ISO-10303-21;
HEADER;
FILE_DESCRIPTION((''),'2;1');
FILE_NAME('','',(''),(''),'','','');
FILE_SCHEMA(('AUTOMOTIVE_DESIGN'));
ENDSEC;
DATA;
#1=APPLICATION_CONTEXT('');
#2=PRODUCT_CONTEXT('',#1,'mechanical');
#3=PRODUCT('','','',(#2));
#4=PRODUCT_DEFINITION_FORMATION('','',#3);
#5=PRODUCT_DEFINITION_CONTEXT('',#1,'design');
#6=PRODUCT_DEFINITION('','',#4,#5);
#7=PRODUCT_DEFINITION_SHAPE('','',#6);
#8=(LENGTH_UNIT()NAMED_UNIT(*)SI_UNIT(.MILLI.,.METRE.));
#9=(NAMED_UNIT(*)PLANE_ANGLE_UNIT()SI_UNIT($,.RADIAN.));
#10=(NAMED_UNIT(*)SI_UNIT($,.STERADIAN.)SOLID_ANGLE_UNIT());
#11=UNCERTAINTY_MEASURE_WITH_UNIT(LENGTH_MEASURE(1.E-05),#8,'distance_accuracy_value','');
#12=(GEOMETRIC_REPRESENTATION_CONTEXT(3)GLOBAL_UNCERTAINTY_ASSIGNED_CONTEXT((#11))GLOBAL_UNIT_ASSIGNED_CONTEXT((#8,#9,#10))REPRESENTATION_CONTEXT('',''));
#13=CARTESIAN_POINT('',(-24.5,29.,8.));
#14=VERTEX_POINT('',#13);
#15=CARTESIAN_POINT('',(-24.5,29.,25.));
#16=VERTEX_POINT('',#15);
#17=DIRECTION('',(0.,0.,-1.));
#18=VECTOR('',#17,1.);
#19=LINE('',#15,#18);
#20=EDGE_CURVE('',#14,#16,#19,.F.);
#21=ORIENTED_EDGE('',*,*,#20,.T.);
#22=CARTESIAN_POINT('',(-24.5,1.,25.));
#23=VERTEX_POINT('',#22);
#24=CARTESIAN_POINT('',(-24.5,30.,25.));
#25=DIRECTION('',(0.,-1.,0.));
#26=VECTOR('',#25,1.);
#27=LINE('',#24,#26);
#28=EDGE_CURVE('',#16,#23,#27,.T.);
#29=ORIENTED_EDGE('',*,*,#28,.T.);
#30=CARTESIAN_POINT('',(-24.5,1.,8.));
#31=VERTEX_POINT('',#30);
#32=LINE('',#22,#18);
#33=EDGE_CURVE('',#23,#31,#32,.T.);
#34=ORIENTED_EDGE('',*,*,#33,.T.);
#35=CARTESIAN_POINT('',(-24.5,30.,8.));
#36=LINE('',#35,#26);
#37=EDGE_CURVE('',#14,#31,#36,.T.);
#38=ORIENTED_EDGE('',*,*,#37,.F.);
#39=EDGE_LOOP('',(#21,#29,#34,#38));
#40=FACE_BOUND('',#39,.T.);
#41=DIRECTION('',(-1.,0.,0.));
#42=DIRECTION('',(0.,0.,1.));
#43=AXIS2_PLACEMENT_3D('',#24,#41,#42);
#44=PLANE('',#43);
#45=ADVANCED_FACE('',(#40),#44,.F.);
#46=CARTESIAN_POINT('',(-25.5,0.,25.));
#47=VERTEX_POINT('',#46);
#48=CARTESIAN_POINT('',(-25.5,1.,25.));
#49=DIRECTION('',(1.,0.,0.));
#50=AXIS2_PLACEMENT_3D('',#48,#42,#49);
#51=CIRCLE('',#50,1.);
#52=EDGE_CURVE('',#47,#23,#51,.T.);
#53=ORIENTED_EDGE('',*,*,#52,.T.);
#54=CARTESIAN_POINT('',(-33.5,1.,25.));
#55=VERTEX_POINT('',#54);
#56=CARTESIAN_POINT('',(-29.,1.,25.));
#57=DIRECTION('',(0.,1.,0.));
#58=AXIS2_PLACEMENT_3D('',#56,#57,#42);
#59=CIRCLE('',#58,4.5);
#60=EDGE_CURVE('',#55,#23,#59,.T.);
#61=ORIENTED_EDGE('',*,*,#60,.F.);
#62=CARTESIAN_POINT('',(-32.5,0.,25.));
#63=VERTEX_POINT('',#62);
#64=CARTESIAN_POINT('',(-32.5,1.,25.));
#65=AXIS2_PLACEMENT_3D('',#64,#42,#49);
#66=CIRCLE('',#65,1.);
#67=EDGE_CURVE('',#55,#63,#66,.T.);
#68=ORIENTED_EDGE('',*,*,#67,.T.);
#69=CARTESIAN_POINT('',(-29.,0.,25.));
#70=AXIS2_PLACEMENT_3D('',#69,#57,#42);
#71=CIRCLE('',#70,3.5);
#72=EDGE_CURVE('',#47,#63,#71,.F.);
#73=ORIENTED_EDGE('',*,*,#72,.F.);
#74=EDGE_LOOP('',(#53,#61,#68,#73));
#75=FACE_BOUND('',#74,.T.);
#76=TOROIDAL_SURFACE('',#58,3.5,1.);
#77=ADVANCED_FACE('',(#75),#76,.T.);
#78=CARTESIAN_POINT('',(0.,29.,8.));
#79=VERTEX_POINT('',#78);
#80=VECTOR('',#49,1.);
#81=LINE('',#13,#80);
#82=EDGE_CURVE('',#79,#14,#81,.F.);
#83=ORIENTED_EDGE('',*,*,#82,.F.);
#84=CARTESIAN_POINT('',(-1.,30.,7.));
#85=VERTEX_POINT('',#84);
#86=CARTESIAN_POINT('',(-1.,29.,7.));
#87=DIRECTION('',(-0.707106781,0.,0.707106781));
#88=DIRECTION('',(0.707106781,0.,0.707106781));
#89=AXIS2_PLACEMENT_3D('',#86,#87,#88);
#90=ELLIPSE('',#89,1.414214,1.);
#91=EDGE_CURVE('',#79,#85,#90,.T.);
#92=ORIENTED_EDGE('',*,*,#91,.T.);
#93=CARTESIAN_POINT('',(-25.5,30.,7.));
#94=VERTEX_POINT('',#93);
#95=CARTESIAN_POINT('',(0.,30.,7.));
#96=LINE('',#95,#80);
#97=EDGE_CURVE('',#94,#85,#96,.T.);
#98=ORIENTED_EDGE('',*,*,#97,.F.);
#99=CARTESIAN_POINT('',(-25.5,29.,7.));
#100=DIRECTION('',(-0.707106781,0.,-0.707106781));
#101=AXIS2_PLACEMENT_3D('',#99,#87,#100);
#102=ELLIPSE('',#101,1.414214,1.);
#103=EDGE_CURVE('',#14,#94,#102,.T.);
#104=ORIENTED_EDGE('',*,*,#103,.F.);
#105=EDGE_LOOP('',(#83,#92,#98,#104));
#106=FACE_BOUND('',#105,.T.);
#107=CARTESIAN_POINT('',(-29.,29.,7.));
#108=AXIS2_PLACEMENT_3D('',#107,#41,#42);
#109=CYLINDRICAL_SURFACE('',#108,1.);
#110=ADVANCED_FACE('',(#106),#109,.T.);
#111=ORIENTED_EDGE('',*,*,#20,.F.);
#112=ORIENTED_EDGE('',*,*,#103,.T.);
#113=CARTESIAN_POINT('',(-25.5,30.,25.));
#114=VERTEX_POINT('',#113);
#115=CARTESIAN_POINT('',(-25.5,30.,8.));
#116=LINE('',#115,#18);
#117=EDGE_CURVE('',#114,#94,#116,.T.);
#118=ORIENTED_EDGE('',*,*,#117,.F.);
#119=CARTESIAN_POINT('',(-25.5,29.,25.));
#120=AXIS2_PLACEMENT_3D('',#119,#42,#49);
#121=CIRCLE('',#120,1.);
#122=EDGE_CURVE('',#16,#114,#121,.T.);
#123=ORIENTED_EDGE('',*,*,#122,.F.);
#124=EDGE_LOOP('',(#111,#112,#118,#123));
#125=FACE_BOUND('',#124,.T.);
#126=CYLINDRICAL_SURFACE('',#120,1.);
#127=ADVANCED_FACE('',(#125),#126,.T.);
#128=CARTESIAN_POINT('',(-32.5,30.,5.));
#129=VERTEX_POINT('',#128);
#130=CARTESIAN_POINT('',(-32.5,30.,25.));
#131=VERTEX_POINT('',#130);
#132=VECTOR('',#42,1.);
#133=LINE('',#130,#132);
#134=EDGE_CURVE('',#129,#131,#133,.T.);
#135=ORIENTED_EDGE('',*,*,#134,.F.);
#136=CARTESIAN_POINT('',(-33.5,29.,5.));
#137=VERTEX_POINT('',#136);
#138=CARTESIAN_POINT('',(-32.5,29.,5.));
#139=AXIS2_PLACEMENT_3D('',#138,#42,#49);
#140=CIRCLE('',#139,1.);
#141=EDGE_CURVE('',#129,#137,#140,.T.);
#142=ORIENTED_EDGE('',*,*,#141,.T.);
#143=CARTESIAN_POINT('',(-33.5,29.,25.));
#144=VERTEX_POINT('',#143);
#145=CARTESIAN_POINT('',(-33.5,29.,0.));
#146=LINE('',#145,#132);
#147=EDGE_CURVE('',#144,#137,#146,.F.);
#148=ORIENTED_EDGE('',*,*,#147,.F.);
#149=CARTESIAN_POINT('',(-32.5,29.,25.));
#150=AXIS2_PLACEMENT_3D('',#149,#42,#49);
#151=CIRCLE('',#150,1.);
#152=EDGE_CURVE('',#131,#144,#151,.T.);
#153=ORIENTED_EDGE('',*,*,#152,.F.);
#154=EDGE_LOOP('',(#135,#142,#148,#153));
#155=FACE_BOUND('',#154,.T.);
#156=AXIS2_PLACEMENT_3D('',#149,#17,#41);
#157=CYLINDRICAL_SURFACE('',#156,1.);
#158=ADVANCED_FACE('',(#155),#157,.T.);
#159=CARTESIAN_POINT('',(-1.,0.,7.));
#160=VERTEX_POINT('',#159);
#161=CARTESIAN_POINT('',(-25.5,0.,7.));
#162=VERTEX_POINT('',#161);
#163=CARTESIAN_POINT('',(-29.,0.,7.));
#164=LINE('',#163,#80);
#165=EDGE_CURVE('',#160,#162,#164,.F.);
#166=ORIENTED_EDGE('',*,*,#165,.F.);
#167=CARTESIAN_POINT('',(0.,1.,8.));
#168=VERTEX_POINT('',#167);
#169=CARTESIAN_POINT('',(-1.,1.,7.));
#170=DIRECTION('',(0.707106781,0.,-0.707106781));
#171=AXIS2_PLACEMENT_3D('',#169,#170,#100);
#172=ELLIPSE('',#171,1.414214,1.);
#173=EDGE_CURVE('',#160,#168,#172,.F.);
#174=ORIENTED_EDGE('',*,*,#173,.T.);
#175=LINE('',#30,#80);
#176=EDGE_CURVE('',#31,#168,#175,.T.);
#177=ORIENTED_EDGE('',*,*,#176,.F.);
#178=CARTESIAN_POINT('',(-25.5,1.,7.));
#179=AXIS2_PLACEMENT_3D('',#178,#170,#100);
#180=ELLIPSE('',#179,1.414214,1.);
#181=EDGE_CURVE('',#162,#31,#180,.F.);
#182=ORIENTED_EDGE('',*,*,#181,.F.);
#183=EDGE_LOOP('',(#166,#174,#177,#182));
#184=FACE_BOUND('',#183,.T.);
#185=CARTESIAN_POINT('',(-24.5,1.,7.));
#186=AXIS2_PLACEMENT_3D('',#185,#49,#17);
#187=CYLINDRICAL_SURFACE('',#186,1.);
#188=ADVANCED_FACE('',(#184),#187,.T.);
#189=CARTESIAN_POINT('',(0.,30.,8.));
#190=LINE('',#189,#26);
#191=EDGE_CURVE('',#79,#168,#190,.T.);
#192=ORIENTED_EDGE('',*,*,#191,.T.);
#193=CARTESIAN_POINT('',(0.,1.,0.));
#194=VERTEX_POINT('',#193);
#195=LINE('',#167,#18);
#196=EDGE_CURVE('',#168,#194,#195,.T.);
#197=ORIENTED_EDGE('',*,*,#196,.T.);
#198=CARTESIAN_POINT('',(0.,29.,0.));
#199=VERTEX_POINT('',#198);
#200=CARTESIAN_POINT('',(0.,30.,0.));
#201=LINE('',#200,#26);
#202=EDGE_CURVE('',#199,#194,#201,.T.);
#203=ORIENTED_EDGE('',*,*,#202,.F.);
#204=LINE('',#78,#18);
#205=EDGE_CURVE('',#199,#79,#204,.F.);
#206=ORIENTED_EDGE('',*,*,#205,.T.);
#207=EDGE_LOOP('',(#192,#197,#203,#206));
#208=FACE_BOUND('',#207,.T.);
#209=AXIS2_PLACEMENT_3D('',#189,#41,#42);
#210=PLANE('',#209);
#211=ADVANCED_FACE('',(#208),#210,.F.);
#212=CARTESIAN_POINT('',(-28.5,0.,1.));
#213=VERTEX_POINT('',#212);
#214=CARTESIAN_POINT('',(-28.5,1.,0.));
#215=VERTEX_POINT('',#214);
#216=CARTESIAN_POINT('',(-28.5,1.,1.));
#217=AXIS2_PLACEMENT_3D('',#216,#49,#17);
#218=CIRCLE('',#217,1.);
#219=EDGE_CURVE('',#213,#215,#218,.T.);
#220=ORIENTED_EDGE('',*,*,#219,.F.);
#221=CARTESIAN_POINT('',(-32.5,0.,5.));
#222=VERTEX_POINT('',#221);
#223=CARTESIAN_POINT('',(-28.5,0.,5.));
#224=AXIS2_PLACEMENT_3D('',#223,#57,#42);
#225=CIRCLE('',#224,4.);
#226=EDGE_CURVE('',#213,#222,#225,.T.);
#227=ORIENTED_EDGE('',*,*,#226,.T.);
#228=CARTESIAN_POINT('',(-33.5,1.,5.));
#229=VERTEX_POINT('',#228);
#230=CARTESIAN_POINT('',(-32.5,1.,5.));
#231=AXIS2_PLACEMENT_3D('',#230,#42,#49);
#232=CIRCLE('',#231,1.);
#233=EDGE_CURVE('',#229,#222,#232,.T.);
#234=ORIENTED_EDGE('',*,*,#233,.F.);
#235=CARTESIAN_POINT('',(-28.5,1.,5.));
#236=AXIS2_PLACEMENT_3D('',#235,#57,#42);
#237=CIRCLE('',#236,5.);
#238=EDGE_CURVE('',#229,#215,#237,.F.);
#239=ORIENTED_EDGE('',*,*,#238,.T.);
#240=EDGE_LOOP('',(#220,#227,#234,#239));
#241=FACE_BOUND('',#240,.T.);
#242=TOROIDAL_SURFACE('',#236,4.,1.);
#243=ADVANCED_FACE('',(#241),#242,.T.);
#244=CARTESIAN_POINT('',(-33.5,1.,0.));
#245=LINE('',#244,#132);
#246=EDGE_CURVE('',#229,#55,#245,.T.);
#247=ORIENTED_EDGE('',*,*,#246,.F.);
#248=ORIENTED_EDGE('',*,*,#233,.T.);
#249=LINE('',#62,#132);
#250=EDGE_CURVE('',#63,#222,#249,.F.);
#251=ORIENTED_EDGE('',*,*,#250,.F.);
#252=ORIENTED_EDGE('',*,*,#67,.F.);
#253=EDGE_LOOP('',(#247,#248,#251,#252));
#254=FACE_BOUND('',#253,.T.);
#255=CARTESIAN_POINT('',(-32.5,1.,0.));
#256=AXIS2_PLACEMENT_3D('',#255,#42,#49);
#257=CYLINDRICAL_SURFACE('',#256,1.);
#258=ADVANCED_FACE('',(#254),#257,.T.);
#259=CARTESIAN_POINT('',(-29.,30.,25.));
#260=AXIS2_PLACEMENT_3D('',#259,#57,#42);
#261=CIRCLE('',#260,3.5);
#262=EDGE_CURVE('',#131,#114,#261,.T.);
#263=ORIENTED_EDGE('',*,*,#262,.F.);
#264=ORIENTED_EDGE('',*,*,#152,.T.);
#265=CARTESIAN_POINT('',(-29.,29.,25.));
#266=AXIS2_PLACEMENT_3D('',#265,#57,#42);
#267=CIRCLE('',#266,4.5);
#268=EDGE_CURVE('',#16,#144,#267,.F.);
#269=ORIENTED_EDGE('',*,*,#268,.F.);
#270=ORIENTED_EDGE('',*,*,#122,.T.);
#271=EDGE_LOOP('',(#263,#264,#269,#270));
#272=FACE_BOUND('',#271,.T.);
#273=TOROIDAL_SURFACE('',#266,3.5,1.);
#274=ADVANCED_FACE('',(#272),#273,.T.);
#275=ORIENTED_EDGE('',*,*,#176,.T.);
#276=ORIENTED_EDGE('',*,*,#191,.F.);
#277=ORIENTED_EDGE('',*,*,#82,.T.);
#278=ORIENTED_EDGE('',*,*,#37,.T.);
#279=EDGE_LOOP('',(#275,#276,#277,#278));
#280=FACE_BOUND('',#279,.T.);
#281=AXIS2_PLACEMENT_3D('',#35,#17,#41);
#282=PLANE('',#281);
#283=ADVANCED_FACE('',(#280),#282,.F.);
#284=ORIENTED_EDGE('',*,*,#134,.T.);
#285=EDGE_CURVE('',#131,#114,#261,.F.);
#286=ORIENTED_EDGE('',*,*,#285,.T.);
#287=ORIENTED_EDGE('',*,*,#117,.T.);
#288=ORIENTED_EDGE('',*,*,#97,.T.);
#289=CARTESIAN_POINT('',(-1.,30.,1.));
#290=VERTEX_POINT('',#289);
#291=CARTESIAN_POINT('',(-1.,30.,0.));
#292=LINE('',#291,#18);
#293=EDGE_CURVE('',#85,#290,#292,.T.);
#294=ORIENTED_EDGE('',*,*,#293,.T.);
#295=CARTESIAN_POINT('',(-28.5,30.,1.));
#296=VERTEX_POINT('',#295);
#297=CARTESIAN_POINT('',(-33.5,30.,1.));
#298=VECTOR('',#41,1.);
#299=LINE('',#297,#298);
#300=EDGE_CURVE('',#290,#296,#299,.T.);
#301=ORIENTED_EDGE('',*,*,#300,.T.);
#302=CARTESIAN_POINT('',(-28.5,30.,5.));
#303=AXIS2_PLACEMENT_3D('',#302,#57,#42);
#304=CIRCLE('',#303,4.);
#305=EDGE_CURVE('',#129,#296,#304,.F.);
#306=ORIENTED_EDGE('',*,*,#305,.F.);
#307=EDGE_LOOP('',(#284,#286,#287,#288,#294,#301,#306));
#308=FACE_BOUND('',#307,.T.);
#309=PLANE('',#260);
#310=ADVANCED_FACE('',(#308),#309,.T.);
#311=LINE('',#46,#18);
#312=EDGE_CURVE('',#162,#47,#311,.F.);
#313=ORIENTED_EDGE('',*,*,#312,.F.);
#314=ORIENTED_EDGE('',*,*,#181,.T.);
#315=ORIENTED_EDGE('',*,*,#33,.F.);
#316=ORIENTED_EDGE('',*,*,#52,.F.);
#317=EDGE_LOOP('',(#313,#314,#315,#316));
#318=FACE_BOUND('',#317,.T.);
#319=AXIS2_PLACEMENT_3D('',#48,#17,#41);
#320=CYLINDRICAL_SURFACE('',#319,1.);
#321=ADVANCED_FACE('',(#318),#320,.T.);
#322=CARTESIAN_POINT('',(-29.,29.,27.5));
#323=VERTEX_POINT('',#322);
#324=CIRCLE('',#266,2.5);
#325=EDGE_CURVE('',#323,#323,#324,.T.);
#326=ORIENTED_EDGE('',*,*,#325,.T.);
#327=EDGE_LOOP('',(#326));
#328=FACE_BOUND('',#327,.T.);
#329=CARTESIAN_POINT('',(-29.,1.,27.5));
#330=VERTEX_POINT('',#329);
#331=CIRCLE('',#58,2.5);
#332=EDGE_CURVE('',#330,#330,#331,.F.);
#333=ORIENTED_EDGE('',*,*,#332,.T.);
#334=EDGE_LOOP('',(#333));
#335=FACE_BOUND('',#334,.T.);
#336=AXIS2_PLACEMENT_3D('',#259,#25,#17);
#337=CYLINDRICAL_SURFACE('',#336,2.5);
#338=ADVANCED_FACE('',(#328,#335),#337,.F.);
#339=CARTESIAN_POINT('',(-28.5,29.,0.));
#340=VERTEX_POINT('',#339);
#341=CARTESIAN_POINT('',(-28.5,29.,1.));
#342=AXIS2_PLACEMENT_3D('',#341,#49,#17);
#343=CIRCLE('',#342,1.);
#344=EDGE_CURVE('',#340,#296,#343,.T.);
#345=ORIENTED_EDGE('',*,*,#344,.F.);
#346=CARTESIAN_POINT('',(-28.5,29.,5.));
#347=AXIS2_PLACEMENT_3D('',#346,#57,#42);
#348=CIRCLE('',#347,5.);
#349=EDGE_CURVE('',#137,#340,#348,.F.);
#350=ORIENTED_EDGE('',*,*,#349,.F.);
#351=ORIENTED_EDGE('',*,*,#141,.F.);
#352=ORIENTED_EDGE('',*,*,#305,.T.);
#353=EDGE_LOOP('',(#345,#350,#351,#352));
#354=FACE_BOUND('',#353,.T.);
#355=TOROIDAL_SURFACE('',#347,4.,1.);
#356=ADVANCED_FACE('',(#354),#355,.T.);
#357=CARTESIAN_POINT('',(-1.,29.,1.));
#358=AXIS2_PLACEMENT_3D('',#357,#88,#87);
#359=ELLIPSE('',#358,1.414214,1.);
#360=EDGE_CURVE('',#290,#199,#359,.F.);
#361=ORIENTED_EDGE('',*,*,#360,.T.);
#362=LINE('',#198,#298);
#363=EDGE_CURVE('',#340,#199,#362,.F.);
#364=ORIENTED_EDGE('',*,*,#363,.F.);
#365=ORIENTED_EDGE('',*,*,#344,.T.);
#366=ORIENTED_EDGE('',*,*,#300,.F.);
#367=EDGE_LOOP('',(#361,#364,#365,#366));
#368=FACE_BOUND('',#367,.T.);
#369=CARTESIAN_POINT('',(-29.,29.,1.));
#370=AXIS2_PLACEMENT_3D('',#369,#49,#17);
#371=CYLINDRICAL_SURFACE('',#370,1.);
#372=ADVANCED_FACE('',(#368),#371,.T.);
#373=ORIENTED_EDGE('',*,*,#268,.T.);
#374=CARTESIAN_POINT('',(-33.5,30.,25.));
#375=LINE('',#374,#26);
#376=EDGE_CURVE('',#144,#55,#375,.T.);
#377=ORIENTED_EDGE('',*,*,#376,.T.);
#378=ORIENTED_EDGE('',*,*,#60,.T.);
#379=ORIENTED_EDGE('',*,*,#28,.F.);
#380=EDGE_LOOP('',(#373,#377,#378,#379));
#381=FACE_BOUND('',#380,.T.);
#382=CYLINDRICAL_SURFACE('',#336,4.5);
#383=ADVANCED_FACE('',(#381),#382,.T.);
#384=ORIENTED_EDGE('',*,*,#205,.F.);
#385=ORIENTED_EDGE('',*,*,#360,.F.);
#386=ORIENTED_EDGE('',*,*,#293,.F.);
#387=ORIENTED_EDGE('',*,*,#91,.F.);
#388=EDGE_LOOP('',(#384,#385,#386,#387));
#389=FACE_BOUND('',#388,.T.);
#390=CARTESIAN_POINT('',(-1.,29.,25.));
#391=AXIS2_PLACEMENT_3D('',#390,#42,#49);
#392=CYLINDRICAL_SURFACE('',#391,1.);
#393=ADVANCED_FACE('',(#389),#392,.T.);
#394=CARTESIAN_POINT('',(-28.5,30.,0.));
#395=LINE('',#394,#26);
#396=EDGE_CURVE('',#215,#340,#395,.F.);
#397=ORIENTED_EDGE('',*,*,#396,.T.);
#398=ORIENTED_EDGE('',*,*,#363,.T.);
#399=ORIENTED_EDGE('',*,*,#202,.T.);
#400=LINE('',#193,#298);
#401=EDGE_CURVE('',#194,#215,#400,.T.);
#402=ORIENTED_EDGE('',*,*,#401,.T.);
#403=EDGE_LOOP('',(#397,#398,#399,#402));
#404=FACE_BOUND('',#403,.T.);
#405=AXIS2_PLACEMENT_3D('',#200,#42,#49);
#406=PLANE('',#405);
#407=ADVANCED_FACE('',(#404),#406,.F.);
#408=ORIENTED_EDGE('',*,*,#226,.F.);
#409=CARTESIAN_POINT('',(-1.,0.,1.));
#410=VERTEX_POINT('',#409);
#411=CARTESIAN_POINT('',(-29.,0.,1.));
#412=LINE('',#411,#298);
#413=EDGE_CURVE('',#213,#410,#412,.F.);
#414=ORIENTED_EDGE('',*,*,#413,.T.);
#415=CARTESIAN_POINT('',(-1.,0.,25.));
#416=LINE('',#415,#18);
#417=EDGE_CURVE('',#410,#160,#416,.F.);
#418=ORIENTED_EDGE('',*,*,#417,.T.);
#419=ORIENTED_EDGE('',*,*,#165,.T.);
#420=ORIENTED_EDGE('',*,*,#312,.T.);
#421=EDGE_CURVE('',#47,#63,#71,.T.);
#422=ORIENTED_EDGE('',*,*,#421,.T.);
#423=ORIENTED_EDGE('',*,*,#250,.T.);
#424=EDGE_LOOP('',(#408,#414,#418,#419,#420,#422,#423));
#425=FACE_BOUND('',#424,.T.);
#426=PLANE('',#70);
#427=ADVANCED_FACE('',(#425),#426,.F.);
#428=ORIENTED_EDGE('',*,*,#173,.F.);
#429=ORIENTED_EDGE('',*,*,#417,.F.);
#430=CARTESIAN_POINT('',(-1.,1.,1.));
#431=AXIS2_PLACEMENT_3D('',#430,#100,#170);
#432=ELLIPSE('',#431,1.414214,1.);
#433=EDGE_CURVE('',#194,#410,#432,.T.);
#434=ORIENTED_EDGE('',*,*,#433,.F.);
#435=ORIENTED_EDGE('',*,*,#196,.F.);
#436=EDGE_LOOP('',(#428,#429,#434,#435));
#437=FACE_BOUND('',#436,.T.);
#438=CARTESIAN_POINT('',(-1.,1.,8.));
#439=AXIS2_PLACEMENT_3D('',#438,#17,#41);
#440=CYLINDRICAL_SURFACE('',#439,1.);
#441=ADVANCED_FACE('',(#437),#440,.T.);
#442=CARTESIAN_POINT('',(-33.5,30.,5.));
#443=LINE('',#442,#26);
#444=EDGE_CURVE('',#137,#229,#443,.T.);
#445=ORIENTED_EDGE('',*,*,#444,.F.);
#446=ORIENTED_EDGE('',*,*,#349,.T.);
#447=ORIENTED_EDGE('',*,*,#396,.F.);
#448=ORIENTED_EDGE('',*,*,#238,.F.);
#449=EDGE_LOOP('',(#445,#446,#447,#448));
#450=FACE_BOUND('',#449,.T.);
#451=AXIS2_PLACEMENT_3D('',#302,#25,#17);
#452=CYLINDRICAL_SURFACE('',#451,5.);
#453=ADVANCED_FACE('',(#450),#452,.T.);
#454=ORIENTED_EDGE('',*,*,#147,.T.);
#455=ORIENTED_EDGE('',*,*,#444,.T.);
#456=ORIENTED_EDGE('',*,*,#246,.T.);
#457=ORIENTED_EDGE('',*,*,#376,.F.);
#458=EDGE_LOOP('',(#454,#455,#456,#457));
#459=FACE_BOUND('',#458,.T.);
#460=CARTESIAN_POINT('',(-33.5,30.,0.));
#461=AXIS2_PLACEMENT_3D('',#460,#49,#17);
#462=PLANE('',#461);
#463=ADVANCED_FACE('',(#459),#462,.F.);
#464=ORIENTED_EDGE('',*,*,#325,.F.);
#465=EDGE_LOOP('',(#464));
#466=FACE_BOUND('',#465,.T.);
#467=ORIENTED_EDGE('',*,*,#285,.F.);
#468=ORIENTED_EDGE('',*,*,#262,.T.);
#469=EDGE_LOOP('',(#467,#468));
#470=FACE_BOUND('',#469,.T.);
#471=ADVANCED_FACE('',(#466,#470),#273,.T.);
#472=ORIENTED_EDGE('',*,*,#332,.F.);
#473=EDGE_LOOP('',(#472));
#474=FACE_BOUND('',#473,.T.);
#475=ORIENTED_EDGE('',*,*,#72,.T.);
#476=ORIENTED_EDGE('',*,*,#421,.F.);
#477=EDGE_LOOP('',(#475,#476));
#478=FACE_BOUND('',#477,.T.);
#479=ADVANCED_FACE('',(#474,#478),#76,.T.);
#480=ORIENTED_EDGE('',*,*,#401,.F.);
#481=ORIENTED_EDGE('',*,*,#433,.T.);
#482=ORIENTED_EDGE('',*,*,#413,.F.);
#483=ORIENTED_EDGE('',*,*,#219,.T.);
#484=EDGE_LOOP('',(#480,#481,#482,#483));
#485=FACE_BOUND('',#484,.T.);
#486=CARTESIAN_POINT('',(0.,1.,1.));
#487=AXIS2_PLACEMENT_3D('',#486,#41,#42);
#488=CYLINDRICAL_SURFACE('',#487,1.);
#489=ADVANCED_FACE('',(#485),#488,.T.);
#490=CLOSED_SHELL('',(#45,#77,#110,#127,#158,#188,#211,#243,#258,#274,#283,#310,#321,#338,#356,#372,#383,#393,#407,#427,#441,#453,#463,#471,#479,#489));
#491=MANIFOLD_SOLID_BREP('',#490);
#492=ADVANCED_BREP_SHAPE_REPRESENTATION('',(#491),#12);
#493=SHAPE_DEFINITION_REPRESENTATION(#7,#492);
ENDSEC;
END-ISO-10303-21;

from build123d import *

# Parameters (mm, degrees)
SKETCH1_R           = 2.5
BOSS_EXTRUDE1_DEPTH = 30
FILLET1_R           = 1
FILLET2_R           = 5


# Some blends are built 0.0001 mm under size
with BuildPart() as part:
    # Sketch1 → Boss-Extrude1 (new body)
    with BuildSketch(Plane(origin=(0, 0, 0), x_dir=(1, 0, 0), z_dir=(0, 1, 0))):
        with BuildLine():
            Line((0, 0), (-33.5, 0))
            Line((-33.5, 0), (-33.5, -25))
            ThreePointArc((-33.5, -25), (-29, -29.5), (-24.5, -25))
            Line((-24.5, -25), (-24.5, -8))
            Line((-24.5, -8), (0, -8))
            Line((0, -8), (0, 0))
        make_face()
        with Locations(Location((-29, -25, 0), (0, 0, 270))):
            Circle(SKETCH1_R, mode=Mode.SUBTRACT)
    extrude(amount=BOSS_EXTRUDE1_DEPTH)

    # Fillet1
    fillet1_edges = [part.edges().sort_by_distance(p)[0] for p in [
        (-33.5, 30, 12.5),
        (-29, 30, 29.5),
        (-29, 0, 22.5),
        (-29, 30, 22.5),
        (-24.5, 30, 16.5),
        (-12.25, 30, 8),
        (0, 30, 4),
        (-12.25, 0, 8),
        (-24.5, 0, 16.5),
        (-29, 0, 29.5),
        (-33.5, 0, 12.5),
        (-16.75, 0, 0),
        (0, 0, 4),
        (-16.75, 30, 0),
    ]]
    fillet(fillet1_edges, radius=FILLET1_R - 0.0001)  # a hair under: the kernel refuses the full size

    # Fillet2
    # the kernel refuses this fillet: 5 mm, written as the material it takes off along each edge
    with BuildSketch(Plane(origin=(-28.5, 0, 5), x_dir=(-1, 0, 0), z_dir=(0, 0, 1))) as fillet2_piece_1:
        with BuildLine():
            CenterArc((4.0001, -0.9999), 0.9999, 0, 90)
            Line((5, -0.9999), (5, 0))
            Line((5, 0), (4.0001, 0))
        make_face()
    revolve(axis=Axis((-28.5, 0, 5), (0, -1, 0)), revolution_arc=90, mode=Mode.SUBTRACT)
    with BuildSketch(Plane(origin=(-28.5, 30, 5), x_dir=(0, 0, -1), z_dir=(1, 0, 0))) as fillet2_piece_2:
        with BuildLine():
            CenterArc((4.0001, -0.9999), 0.9999, 0, 90)
            Line((5, -0.9999), (5, 0))
            Line((5, 0), (4.0001, 0))
        make_face()
    revolve(axis=Axis((-28.5, 30, 5), (0, 1, 0)), revolution_arc=90, mode=Mode.SUBTRACT)
    with BuildSketch(Plane(origin=(-33.5, 0, 0), x_dir=(1, 0, 0), z_dir=(0, 1, 0))) as fillet2_piece_3:
        with BuildLine():
            CenterArc((FILLET2_R, -FILLET2_R), FILLET2_R, 90, 90)
            Line((0, -FILLET2_R), (0, 0))
            Line((0, 0), (FILLET2_R, 0))
        make_face()
    extrude(amount=30, mode=Mode.SUBTRACT)


solid = part.part
